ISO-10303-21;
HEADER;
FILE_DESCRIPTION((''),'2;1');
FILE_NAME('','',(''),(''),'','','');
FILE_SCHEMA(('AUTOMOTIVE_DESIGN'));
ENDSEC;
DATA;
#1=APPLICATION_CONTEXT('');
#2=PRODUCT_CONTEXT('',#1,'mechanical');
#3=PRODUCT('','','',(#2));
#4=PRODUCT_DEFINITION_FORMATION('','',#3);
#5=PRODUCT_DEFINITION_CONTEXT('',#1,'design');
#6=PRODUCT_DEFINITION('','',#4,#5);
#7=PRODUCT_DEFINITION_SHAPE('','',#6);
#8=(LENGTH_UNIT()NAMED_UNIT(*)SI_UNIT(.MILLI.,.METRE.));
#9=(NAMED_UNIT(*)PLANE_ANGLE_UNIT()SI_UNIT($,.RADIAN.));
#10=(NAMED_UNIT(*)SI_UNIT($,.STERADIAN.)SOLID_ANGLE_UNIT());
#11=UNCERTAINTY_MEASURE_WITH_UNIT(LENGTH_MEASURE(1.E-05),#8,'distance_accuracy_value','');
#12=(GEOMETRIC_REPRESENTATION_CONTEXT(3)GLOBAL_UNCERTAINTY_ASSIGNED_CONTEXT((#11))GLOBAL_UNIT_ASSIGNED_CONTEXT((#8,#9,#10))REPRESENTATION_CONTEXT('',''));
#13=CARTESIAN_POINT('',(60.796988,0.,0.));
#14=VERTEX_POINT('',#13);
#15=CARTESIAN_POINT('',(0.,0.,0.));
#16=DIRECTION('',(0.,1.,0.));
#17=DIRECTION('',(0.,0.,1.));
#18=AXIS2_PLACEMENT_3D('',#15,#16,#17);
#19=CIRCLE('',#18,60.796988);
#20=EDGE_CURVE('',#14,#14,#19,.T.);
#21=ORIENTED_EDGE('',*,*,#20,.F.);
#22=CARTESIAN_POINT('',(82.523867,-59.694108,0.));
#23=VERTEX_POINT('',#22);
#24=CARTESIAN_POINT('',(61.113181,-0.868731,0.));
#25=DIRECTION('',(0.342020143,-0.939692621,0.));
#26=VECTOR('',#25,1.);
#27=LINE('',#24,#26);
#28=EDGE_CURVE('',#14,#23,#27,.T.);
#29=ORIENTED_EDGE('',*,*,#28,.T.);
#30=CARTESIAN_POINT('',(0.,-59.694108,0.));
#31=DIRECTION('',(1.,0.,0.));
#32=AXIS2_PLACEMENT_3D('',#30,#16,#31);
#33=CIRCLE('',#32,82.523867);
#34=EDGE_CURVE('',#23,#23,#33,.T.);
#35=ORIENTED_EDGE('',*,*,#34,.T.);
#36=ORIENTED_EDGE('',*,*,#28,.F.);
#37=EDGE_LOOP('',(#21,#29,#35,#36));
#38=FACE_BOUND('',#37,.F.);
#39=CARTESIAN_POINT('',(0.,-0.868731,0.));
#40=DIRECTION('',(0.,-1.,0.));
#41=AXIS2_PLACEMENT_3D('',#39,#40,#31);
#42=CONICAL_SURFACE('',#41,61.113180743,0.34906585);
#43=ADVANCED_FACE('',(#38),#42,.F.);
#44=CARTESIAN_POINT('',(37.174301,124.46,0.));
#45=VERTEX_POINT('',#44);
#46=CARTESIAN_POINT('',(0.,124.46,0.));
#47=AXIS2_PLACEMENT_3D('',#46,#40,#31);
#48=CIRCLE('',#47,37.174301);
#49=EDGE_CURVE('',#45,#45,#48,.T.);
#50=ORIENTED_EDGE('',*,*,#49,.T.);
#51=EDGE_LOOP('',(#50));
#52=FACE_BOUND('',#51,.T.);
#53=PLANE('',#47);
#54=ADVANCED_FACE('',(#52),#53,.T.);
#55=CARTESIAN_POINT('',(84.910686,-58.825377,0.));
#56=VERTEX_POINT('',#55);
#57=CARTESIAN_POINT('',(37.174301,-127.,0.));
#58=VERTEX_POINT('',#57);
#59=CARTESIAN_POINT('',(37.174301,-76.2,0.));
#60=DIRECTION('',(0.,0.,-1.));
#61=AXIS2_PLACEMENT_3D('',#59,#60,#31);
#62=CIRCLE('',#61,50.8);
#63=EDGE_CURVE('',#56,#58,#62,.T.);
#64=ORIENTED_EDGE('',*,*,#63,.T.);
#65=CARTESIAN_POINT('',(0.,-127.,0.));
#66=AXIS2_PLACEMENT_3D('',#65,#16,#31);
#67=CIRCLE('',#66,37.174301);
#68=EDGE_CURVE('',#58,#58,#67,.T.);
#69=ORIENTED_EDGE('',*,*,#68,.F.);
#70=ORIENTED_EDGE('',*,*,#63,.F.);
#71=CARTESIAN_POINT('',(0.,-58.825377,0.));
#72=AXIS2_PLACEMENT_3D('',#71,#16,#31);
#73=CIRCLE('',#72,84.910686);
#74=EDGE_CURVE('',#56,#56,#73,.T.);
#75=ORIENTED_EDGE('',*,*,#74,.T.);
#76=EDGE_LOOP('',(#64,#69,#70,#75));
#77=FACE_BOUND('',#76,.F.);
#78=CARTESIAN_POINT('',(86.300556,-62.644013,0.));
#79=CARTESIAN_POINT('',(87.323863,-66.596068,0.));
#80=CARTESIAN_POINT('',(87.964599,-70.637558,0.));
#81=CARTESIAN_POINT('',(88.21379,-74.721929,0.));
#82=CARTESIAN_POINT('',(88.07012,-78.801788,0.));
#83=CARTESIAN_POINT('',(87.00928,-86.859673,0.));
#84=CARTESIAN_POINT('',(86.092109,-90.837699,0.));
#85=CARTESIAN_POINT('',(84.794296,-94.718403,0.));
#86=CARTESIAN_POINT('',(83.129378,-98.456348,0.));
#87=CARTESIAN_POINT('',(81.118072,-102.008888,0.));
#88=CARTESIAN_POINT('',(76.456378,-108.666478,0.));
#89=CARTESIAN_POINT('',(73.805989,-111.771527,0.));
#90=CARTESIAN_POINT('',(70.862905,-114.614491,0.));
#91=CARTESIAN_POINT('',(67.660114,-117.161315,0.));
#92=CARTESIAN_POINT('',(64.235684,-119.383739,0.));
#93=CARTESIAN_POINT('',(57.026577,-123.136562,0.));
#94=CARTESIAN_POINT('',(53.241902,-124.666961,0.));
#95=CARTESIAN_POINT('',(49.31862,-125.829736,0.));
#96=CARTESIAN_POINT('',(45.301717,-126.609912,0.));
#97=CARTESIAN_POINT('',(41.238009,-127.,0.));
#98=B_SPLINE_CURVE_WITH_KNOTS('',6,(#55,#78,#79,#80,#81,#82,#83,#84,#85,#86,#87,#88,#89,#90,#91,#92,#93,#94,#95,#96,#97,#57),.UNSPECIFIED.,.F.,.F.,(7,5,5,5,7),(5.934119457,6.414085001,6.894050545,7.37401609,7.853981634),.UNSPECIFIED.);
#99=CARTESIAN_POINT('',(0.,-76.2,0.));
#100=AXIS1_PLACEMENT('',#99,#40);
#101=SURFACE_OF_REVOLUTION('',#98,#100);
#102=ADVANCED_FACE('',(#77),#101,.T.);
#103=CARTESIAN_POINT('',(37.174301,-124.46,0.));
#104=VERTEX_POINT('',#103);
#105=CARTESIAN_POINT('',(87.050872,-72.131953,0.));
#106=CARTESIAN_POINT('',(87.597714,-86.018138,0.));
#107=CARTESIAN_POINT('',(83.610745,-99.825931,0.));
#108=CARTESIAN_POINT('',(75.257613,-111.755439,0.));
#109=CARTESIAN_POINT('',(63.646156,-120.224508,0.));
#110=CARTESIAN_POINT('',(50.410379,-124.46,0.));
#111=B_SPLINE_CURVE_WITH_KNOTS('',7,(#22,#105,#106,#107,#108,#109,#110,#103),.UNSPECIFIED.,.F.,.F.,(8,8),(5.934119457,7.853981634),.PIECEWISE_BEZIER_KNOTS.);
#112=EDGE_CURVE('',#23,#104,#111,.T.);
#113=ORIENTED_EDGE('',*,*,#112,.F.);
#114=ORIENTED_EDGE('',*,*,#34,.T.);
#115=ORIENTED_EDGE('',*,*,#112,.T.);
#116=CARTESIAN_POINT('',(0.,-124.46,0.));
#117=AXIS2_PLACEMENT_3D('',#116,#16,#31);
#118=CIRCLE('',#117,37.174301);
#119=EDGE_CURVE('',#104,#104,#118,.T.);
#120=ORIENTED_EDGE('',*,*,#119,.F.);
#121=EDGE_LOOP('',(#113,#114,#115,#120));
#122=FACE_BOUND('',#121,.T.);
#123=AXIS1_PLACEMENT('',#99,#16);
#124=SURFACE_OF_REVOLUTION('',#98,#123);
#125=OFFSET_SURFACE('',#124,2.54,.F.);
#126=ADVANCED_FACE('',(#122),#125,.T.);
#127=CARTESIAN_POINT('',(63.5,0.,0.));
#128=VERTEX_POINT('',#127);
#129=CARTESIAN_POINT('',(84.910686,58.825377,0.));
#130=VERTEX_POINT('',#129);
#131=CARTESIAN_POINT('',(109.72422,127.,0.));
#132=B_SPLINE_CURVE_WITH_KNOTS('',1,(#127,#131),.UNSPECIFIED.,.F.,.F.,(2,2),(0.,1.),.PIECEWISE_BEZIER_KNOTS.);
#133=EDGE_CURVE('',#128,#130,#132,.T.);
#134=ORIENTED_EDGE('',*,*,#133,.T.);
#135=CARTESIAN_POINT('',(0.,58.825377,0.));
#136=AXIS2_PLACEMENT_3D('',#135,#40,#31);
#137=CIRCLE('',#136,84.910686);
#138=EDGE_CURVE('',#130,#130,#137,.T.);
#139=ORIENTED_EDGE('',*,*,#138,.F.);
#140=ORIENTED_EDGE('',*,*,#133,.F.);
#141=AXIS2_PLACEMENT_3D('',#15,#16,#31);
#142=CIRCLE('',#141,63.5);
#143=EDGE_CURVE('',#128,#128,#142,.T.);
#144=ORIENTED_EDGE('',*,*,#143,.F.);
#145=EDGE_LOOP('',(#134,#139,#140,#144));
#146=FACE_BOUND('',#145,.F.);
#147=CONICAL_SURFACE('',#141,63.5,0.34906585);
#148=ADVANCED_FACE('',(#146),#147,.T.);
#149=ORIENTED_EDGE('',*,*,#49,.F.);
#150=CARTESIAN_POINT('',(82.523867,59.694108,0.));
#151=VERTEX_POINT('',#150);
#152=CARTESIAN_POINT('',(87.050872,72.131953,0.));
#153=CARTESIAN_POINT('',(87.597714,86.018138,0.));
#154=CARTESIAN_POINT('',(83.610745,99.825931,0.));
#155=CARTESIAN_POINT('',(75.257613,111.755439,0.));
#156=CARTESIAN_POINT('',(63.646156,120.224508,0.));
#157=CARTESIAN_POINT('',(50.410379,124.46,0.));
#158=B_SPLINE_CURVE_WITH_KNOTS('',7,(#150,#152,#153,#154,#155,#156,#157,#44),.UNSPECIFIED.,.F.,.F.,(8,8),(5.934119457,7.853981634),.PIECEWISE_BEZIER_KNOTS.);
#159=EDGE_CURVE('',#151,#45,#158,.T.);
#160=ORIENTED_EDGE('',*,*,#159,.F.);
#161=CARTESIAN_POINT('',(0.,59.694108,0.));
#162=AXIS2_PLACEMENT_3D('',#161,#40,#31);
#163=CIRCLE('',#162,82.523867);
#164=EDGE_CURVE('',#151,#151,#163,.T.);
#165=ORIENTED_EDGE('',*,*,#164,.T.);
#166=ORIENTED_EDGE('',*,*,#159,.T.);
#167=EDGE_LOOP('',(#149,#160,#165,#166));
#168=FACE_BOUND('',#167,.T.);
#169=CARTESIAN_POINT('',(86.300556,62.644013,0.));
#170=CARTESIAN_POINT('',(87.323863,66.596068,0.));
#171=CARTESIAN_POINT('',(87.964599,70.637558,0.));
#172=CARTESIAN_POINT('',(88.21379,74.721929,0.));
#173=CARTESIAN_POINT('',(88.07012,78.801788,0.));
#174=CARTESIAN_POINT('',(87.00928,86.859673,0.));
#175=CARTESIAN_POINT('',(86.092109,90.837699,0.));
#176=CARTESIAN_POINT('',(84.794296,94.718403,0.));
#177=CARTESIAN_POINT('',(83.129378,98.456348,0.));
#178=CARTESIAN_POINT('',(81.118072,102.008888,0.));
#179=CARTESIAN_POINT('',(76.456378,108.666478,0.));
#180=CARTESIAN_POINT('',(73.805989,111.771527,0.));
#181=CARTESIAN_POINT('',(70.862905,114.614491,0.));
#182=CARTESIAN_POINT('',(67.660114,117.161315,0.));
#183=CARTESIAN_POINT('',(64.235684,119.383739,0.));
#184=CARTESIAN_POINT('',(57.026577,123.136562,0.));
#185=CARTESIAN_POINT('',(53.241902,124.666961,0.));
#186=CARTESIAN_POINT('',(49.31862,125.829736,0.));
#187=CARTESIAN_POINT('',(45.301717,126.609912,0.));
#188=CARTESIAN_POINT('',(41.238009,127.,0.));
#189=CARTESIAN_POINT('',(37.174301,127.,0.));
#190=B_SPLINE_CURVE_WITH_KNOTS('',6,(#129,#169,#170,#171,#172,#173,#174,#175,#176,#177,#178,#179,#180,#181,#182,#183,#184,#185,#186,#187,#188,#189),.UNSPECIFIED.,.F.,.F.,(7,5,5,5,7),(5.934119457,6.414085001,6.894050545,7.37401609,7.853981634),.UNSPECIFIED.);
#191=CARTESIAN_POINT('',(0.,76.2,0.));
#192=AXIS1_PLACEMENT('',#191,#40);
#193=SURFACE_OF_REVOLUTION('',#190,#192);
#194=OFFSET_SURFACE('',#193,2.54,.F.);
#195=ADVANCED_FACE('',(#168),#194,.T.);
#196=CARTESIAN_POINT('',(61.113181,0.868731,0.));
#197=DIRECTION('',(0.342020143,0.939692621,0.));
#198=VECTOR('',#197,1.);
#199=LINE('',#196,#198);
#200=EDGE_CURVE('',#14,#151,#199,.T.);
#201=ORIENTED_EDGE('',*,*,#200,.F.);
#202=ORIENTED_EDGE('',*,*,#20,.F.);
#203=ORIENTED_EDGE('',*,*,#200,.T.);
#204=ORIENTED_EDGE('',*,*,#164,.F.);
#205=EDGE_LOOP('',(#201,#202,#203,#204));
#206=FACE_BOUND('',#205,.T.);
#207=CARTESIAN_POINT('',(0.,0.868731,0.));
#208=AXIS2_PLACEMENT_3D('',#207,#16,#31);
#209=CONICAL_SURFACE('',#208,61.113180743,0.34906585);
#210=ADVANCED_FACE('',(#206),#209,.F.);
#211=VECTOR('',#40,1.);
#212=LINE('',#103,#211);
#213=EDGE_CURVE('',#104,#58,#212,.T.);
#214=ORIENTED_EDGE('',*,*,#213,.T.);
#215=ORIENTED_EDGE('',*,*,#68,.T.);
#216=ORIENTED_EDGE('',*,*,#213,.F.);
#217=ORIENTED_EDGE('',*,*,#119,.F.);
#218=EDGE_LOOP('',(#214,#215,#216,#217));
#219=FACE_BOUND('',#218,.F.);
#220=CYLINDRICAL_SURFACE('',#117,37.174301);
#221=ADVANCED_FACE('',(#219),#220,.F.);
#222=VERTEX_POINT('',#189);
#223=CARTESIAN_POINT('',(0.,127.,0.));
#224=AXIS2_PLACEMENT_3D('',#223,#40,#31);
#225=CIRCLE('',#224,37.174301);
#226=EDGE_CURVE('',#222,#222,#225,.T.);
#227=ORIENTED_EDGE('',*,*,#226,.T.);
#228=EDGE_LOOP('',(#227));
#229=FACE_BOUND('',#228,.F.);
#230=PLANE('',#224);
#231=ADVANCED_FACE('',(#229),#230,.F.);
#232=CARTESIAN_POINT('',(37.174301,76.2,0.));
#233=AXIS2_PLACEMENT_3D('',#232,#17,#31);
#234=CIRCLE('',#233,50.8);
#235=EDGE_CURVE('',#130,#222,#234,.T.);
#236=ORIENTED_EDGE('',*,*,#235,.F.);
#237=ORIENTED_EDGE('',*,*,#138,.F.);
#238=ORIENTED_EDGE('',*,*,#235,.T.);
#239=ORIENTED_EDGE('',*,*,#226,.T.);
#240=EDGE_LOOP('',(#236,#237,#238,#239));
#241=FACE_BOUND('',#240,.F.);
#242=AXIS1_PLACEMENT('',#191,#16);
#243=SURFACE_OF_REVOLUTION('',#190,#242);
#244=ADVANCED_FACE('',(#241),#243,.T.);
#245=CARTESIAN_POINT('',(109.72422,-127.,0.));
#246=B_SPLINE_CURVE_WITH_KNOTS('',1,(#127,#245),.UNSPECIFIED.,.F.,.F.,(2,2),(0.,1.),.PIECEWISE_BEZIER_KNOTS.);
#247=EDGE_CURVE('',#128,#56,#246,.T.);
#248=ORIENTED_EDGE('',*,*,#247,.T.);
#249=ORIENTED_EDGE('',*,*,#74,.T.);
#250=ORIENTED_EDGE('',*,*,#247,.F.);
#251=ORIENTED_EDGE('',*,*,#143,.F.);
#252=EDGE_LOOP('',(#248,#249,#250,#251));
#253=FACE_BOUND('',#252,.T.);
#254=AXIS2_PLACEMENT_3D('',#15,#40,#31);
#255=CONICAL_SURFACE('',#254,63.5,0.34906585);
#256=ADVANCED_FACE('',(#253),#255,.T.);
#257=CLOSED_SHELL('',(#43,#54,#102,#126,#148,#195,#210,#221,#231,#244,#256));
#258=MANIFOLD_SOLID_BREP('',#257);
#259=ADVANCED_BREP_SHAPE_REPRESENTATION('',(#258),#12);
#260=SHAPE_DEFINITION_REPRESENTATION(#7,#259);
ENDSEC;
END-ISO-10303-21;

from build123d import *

# Parameters (mm, degrees)
F0_R     = 63.5
F1_DEPTH = 127
F1_TAPER = -20
F2_R     = 50.8
F3_T     = -2.54


# Not quite as in the source:
# - a shell that OpenCascade refuses in one call is made with other operations: the cavity is built on its own and cut out


with BuildPart() as f1:
    # F0 (on Front) → F1 (new body, symmetric)
    with BuildSketch(Plane.XZ):
        Circle(F0_R)
    extrude(amount=F1_DEPTH, both=True, taper=F1_TAPER)

    # F2
    f2_edges = [f1.edges().sort_by_distance(p)[0] for p in [
        (-109.72422, -127, 0),
        (-109.72422, 127, 0),
    ]]
    fillet(f2_edges, radius=F2_R)

    # F3: a shell. OpenCascade refuses it in one call, so the cavity is built on its own and cut out:
    # the body offset inwards by the wall thickness, plus a prism from it out through each open face.
    f3_core = offset(f1.part, amount=F3_T, kind=Kind.INTERSECTION, mode=Mode.PRIVATE)
    f3_exits = [f3_core.faces().sort_by_distance(p)[0] for p in [
        (0, -124.46, 0),
    ]]
    add(f3_core, mode=Mode.SUBTRACT)
    extrude(f3_exits, amount=-F3_T, mode=Mode.SUBTRACT)


solid = f1.part
